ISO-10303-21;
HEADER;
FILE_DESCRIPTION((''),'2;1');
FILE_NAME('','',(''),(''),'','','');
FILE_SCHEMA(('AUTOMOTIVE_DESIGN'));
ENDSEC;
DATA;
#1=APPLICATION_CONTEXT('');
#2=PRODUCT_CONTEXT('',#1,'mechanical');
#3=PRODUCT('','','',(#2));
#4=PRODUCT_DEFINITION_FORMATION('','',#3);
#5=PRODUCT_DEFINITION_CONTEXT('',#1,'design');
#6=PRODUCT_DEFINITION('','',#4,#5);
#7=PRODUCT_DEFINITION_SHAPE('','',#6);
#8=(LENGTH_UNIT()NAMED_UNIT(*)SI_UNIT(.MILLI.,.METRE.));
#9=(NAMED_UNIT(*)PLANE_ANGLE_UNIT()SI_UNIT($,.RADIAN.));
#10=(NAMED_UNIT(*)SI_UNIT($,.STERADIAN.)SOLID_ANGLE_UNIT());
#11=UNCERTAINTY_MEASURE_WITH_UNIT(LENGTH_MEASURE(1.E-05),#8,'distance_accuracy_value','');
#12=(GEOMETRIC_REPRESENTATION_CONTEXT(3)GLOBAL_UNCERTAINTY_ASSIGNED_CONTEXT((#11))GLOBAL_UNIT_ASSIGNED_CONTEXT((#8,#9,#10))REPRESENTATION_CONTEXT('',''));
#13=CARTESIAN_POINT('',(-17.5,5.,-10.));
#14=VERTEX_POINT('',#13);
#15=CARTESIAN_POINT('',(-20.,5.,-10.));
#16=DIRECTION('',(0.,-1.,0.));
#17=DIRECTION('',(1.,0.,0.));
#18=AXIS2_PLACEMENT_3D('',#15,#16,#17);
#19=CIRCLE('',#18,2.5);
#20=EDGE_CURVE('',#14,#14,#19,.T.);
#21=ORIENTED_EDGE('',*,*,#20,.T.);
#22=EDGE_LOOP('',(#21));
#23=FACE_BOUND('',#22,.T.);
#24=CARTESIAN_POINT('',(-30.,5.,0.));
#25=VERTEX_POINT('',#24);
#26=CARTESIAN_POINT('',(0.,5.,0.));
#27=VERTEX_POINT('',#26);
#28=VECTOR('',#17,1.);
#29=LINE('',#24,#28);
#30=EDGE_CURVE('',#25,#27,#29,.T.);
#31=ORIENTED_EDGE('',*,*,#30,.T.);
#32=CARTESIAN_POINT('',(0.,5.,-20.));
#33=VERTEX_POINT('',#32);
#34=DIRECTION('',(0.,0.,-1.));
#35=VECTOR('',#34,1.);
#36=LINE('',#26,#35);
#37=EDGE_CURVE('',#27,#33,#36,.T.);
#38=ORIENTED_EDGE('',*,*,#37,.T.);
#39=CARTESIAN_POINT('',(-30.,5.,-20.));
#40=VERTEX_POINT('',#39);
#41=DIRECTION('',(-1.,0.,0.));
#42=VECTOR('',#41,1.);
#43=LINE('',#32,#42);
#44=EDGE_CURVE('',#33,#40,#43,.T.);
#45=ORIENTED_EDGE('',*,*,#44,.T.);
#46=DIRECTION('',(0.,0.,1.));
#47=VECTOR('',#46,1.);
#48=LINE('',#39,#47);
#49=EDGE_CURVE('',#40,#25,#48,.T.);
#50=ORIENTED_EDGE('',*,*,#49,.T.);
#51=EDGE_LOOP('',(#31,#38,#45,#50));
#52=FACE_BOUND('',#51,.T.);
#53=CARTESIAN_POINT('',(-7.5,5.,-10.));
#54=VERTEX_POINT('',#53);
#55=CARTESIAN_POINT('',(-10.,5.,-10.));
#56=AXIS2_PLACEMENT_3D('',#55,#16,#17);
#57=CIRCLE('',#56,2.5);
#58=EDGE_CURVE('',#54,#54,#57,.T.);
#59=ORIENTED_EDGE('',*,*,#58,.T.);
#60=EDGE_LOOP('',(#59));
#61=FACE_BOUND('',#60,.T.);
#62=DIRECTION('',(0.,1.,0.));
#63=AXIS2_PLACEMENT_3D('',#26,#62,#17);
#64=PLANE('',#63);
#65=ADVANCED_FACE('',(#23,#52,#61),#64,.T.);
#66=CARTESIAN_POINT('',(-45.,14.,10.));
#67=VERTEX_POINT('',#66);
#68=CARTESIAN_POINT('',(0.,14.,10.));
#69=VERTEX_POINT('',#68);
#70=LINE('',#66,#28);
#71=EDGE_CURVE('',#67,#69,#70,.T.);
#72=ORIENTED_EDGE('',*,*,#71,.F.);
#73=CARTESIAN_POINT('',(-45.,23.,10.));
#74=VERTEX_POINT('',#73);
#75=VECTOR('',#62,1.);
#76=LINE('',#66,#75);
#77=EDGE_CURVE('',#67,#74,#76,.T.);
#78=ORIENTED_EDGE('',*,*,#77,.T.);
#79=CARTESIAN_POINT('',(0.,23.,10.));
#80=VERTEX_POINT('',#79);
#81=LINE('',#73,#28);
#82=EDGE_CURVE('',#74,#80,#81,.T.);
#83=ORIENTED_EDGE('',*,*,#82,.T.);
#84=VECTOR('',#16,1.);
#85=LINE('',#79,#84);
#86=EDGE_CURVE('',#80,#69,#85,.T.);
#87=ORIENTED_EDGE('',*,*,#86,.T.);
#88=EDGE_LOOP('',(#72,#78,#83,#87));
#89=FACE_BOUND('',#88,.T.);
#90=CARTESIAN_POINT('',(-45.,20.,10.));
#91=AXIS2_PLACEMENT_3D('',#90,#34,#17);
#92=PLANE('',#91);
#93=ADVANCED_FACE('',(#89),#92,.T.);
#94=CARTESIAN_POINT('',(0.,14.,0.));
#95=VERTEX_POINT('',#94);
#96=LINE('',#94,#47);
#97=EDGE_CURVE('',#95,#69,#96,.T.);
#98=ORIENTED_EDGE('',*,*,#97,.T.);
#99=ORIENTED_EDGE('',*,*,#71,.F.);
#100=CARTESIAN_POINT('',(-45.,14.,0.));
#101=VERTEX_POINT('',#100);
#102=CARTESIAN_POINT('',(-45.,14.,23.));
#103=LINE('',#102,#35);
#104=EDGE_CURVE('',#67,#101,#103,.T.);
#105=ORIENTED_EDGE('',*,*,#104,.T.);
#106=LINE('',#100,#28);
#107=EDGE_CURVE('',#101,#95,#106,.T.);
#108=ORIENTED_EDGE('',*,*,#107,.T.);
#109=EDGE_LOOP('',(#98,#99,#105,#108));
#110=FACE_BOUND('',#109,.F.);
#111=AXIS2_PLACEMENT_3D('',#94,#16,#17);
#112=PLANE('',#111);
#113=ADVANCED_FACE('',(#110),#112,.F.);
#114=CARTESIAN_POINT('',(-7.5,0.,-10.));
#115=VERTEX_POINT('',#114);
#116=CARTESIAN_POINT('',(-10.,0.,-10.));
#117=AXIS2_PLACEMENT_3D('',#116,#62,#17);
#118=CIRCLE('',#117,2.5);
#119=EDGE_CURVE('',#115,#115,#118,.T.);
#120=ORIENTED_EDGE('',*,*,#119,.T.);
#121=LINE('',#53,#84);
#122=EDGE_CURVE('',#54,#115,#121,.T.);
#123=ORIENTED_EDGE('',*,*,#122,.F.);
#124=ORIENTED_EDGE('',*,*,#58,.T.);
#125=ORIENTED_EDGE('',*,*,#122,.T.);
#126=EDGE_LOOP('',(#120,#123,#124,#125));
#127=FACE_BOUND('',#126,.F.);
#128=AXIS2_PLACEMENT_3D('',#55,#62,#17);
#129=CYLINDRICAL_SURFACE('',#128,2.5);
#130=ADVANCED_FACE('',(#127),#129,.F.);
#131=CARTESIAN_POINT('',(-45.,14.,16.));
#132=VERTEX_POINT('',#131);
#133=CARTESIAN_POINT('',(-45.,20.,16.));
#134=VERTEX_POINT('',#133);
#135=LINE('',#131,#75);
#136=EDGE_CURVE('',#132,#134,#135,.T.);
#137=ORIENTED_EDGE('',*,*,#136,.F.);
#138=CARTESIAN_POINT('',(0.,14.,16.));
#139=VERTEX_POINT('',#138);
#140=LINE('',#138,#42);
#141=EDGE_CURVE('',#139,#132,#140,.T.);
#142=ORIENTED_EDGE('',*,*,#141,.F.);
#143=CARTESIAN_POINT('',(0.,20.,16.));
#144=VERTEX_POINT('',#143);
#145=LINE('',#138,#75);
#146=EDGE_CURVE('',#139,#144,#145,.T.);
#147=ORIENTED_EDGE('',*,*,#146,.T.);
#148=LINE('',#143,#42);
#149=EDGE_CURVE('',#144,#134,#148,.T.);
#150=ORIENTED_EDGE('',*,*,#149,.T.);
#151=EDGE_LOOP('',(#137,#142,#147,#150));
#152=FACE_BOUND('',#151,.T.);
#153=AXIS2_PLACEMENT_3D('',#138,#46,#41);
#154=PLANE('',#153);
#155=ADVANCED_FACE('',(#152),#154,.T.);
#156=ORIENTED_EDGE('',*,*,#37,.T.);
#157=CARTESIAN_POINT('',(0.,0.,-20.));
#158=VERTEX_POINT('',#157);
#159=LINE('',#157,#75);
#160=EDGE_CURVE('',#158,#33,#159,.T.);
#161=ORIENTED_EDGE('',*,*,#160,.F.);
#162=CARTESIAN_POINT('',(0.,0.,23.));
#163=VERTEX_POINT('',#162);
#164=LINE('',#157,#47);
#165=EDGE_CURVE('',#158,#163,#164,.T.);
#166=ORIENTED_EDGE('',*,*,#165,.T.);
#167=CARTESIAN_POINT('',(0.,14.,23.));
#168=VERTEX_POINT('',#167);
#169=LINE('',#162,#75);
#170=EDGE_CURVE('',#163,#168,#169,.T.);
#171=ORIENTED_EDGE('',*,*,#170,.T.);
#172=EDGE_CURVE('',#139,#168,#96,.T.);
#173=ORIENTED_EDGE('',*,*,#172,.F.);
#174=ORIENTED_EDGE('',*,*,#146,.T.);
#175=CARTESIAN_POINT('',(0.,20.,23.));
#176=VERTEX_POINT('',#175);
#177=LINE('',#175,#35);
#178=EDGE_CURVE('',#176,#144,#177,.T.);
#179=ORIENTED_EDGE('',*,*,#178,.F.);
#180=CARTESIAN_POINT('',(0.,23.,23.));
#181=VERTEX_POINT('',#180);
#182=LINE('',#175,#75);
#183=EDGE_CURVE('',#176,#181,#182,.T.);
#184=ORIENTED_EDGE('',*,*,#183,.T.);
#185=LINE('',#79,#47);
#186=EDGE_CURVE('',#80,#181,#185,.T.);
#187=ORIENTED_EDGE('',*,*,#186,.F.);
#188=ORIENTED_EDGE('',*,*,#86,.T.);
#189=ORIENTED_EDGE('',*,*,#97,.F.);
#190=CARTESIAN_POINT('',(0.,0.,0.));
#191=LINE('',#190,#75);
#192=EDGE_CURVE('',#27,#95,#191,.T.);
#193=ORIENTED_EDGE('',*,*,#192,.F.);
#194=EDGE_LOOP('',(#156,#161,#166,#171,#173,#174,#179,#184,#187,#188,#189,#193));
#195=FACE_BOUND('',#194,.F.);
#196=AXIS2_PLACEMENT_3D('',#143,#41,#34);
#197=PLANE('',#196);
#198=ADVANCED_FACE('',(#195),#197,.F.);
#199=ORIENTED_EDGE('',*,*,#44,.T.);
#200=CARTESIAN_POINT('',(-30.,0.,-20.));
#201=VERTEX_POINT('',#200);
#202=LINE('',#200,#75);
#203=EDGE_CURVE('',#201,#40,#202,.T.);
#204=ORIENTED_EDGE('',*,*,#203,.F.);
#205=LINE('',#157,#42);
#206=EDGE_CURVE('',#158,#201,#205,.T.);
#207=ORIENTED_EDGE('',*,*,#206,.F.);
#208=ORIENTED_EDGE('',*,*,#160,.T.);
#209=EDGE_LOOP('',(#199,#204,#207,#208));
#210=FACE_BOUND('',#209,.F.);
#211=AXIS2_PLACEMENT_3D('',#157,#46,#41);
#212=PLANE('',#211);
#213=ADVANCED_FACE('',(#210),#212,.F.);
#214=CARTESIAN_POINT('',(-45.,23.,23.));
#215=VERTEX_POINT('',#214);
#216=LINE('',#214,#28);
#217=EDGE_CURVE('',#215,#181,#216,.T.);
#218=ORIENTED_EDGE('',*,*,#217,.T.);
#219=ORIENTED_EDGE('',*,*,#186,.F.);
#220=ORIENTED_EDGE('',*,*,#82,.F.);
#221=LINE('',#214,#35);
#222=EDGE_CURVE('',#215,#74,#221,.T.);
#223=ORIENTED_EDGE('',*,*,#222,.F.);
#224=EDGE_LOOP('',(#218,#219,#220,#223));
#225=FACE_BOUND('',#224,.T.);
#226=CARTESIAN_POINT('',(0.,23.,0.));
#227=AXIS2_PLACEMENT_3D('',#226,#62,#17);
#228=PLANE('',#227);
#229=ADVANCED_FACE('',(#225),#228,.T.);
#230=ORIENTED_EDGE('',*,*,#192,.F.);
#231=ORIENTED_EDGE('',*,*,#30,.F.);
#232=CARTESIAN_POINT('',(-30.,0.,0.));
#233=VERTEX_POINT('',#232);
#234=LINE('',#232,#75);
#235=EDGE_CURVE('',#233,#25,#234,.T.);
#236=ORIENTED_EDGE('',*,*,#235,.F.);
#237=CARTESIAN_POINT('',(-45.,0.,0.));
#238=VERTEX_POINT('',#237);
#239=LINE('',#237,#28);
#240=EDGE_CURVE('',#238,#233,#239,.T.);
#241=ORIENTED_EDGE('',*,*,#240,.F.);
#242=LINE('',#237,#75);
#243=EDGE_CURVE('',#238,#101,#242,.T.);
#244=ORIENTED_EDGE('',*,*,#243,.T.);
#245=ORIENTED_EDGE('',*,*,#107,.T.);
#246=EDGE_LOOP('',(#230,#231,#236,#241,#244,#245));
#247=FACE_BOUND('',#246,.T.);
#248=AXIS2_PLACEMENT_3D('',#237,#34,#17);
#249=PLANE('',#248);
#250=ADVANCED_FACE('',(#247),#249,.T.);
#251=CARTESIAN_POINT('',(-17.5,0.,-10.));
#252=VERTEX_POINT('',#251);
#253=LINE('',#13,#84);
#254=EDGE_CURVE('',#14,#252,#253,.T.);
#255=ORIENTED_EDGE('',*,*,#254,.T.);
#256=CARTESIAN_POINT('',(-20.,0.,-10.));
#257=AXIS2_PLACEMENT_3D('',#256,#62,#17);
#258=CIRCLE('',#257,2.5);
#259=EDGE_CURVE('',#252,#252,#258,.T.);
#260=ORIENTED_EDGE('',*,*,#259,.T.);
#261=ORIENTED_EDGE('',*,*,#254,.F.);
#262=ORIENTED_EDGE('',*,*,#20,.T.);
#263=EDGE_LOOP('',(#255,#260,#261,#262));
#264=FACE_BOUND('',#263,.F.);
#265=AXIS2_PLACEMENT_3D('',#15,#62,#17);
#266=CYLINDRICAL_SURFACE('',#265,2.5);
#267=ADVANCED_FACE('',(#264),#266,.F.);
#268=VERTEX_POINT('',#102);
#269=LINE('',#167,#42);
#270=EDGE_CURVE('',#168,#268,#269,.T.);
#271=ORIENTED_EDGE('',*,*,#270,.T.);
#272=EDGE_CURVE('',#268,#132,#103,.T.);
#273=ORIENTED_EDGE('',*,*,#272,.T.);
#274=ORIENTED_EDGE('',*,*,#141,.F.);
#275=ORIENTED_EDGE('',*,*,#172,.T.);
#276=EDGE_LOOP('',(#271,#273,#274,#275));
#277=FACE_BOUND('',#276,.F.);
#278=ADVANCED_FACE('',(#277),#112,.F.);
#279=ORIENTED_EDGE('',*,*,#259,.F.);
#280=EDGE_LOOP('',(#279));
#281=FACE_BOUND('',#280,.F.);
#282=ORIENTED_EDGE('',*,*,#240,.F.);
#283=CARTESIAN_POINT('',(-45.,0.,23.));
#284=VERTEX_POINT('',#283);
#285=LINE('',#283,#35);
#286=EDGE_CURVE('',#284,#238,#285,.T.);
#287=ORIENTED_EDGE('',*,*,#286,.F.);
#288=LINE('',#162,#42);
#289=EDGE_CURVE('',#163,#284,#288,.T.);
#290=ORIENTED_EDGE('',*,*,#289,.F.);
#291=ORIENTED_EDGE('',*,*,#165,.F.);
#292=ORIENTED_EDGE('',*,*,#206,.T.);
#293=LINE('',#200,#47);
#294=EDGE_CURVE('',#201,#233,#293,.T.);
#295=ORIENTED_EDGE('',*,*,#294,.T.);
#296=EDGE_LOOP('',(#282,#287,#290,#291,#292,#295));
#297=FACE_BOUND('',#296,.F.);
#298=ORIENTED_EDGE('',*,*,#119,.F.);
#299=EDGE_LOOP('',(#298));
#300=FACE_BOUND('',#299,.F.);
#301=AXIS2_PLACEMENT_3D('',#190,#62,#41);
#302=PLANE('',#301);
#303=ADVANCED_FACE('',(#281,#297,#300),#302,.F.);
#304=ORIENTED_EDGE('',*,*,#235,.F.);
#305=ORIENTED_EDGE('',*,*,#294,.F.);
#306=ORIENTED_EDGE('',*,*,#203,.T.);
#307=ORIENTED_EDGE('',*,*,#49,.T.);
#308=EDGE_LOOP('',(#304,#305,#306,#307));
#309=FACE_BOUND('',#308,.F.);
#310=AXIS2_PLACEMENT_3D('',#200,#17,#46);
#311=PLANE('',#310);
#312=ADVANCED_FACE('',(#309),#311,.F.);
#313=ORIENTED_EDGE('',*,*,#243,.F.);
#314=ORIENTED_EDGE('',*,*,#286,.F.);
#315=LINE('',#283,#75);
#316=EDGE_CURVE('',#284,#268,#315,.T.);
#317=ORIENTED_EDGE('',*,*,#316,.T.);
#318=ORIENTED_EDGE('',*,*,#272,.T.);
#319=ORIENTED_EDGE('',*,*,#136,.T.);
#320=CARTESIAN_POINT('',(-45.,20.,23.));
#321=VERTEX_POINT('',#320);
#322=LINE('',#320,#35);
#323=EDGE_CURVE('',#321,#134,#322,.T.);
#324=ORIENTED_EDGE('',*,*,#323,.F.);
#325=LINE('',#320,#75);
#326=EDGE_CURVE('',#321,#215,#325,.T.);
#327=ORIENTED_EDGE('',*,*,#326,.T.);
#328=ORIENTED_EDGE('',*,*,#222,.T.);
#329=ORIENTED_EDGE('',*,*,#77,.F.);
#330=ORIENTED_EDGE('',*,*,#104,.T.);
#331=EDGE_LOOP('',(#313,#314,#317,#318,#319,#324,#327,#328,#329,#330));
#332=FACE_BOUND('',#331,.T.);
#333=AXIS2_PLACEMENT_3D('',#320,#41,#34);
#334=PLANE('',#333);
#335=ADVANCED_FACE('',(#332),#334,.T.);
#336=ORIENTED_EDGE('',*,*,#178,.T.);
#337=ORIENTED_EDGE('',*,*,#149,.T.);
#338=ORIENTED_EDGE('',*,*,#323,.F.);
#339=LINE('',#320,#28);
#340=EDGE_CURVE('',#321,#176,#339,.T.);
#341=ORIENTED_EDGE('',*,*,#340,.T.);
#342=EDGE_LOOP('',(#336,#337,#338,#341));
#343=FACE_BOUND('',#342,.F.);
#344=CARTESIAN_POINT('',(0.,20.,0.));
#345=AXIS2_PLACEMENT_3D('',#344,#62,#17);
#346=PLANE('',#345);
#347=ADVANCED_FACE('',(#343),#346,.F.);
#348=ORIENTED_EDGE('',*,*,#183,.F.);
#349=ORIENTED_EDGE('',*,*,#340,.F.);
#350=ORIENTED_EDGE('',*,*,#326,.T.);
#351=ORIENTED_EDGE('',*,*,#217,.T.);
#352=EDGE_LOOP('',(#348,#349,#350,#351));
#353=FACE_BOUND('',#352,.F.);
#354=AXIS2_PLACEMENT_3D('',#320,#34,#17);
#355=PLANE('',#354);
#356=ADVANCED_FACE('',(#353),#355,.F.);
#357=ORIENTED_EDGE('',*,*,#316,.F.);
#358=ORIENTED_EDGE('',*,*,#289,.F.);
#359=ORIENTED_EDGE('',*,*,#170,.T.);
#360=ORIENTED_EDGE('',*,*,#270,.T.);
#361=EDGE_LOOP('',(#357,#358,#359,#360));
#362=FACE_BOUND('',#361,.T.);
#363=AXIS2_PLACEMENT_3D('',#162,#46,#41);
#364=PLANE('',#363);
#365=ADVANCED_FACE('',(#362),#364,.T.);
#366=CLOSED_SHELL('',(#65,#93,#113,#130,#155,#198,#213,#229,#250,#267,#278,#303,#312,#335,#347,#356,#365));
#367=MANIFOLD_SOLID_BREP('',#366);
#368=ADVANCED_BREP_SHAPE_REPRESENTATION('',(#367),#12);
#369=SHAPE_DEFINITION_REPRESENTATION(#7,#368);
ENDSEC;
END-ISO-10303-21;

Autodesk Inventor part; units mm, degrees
ref_plane "YZ Plane" through (0, 0, 0) normal (1, 0, 0) x (0, 1, 0)
ref_plane "XZ Plane" through (0, 0, 0) normal (0, 1, 0) x (-1, 0, 0)
ref_plane "XY Plane" through (0, 0, 0) normal (0, 0, 1) x (1, 0, 0)
sketch "Esboço1" plane through (0, 0, 0) normal (0, 1, 0) x (-1, 0, 0)
  line L0 (0, 0) -> (0, -20)
  line L1 (0, -20) -> (30, -20)
  line L2 (30, -20) -> (30, 0)
  line L3 (30, 0) -> (0, 0)
  circle A0 centre (15, -10) radius 2.5
  dimension "d0" = 20
  dimension "d1" = 30
  dimension "d2" = 5
extrude "Extrusão1" add sketch "Esboço1" along normal blind 5
sketch "Esboço2" plane through (0, 0, 0) normal (0, -1, 0) x (1, 0, 0)
  line L0 (0, 0) -> (0, 23)
  line L1 (0, 23) -> (-45, 23)
  line L2 (-45, 23) -> (-45, 0)
  line L3 (-45, 0) -> (0, 0)
  dimension "d5" = 23
  dimension "d6" = 45
extrude "Extrusão2" add sketch "Esboço2" against normal blind 14
sketch "Esboço3" plane through (0, 14, 0) normal (0, 1, 0) x (1, 0, 0)
  line L0 (0, -23) -> (0, 20) projected
  line L1 (0, -23) -> (0, -16)
  line L2 (0, -16) -> (-45, -16)
  line L3 (-45, 0) -> (-45, -23) projected
  line L4 (-45, -16) -> (-45, -10)
  line L5 (-45, -10) -> (0, -10)
  line L6 (0, -10) -> (0, -16)
  point P0 (0, 0)
  dimension "d9" = 7
  dimension "d10" = 6
extrude "Extrusão3" add sketch "Esboço3" along normal blind 6
sketch "Esboço4" plane through (0, 20, 0) normal (0, 1, 0) x (1, 0, 0)
  line L0 (-45, -10) -> (0, -10) projected
  line L1 (-45, -23) -> (-45, 0) projected
  line L2 (-45, -10) -> (-45, -23)
  line L3 (-45, -23) -> (0, -23) projected
  line L4 (-45, -23) -> (0, -23)
  line L5 (0, -16) -> (0, -10) projected
  line L6 (0, -23) -> (0, -10)
  line L7 (0, -10) -> (-45, -10)
  point P0 (0, 0)
extrude "Extrusão4" add sketch "Esboço4" along normal blind 3
sketch "Esboço5" plane through (-45, 0, 0) normal (-1, 0, 0) x (0, 0, 1)
  line L0 (10, 14) -> (12.7, 14)
  line L1 (12.7, 14) -> (12.7, 9.5)
  line L2 (12.7, 9.5) -> (10, 9.5)
  line L3 (10, 14) -> (10, 23) projected
  line L4 (10, 9.5) -> (10, 14)
  point P0 (0, 0)
  dimension "d15" = 2.7
  dimension "d16" = 4.5
extrude "Extrusão5" add sketch "Esboço5" along normal blind 10
offset faces "Tamanho1" outward -10 faces at (-55, 12.5, 10.9)
sketch "Esboço6" plane through (0, 5, 0) normal (0, 1, 0) x (1, 0, 0)
  line L0 (0, -23) -> (0, 20) projected
  line L1 (0, 20) -> (-15, 20)
  line L2 (0, 20) -> (-30, 20) projected
  line L3 (-15, 20) -> (-15, 10)
  circle A0 centre (-15, 10) radius 2.5
  point P0 (0, 0)
  dimension "d20" = 10
extrude "Extrusão6" add sketch "Esboço6" against normal blind 5
sketch "Esboço7" plane through (0, 5, 0) normal (0, 1, 0) x (1, 0, 0)
  line L0 (0, 20) -> (-30, 20) projected
  line L1 (0, 20) -> (-10, 20)
  line L2 (-10, 20) -> (-20, 20)
  line L3 (-20, 20) -> (-20, 10)
  line L4 (-10, 20) -> (-10, 10)
  circle A0 centre (-10, 10) radius 2.5
  circle A1 centre (-20, 10) radius 2.5
  point P0 (0, 0)
  dimension "d23" = 10
  dimension "d24" = 10
  dimension "d25" = 10
  dimension "d26" = 5
extrude "Extrusão7" cut sketch "Esboço7" against normal blind 5
properties part number "suporte p trilho"
